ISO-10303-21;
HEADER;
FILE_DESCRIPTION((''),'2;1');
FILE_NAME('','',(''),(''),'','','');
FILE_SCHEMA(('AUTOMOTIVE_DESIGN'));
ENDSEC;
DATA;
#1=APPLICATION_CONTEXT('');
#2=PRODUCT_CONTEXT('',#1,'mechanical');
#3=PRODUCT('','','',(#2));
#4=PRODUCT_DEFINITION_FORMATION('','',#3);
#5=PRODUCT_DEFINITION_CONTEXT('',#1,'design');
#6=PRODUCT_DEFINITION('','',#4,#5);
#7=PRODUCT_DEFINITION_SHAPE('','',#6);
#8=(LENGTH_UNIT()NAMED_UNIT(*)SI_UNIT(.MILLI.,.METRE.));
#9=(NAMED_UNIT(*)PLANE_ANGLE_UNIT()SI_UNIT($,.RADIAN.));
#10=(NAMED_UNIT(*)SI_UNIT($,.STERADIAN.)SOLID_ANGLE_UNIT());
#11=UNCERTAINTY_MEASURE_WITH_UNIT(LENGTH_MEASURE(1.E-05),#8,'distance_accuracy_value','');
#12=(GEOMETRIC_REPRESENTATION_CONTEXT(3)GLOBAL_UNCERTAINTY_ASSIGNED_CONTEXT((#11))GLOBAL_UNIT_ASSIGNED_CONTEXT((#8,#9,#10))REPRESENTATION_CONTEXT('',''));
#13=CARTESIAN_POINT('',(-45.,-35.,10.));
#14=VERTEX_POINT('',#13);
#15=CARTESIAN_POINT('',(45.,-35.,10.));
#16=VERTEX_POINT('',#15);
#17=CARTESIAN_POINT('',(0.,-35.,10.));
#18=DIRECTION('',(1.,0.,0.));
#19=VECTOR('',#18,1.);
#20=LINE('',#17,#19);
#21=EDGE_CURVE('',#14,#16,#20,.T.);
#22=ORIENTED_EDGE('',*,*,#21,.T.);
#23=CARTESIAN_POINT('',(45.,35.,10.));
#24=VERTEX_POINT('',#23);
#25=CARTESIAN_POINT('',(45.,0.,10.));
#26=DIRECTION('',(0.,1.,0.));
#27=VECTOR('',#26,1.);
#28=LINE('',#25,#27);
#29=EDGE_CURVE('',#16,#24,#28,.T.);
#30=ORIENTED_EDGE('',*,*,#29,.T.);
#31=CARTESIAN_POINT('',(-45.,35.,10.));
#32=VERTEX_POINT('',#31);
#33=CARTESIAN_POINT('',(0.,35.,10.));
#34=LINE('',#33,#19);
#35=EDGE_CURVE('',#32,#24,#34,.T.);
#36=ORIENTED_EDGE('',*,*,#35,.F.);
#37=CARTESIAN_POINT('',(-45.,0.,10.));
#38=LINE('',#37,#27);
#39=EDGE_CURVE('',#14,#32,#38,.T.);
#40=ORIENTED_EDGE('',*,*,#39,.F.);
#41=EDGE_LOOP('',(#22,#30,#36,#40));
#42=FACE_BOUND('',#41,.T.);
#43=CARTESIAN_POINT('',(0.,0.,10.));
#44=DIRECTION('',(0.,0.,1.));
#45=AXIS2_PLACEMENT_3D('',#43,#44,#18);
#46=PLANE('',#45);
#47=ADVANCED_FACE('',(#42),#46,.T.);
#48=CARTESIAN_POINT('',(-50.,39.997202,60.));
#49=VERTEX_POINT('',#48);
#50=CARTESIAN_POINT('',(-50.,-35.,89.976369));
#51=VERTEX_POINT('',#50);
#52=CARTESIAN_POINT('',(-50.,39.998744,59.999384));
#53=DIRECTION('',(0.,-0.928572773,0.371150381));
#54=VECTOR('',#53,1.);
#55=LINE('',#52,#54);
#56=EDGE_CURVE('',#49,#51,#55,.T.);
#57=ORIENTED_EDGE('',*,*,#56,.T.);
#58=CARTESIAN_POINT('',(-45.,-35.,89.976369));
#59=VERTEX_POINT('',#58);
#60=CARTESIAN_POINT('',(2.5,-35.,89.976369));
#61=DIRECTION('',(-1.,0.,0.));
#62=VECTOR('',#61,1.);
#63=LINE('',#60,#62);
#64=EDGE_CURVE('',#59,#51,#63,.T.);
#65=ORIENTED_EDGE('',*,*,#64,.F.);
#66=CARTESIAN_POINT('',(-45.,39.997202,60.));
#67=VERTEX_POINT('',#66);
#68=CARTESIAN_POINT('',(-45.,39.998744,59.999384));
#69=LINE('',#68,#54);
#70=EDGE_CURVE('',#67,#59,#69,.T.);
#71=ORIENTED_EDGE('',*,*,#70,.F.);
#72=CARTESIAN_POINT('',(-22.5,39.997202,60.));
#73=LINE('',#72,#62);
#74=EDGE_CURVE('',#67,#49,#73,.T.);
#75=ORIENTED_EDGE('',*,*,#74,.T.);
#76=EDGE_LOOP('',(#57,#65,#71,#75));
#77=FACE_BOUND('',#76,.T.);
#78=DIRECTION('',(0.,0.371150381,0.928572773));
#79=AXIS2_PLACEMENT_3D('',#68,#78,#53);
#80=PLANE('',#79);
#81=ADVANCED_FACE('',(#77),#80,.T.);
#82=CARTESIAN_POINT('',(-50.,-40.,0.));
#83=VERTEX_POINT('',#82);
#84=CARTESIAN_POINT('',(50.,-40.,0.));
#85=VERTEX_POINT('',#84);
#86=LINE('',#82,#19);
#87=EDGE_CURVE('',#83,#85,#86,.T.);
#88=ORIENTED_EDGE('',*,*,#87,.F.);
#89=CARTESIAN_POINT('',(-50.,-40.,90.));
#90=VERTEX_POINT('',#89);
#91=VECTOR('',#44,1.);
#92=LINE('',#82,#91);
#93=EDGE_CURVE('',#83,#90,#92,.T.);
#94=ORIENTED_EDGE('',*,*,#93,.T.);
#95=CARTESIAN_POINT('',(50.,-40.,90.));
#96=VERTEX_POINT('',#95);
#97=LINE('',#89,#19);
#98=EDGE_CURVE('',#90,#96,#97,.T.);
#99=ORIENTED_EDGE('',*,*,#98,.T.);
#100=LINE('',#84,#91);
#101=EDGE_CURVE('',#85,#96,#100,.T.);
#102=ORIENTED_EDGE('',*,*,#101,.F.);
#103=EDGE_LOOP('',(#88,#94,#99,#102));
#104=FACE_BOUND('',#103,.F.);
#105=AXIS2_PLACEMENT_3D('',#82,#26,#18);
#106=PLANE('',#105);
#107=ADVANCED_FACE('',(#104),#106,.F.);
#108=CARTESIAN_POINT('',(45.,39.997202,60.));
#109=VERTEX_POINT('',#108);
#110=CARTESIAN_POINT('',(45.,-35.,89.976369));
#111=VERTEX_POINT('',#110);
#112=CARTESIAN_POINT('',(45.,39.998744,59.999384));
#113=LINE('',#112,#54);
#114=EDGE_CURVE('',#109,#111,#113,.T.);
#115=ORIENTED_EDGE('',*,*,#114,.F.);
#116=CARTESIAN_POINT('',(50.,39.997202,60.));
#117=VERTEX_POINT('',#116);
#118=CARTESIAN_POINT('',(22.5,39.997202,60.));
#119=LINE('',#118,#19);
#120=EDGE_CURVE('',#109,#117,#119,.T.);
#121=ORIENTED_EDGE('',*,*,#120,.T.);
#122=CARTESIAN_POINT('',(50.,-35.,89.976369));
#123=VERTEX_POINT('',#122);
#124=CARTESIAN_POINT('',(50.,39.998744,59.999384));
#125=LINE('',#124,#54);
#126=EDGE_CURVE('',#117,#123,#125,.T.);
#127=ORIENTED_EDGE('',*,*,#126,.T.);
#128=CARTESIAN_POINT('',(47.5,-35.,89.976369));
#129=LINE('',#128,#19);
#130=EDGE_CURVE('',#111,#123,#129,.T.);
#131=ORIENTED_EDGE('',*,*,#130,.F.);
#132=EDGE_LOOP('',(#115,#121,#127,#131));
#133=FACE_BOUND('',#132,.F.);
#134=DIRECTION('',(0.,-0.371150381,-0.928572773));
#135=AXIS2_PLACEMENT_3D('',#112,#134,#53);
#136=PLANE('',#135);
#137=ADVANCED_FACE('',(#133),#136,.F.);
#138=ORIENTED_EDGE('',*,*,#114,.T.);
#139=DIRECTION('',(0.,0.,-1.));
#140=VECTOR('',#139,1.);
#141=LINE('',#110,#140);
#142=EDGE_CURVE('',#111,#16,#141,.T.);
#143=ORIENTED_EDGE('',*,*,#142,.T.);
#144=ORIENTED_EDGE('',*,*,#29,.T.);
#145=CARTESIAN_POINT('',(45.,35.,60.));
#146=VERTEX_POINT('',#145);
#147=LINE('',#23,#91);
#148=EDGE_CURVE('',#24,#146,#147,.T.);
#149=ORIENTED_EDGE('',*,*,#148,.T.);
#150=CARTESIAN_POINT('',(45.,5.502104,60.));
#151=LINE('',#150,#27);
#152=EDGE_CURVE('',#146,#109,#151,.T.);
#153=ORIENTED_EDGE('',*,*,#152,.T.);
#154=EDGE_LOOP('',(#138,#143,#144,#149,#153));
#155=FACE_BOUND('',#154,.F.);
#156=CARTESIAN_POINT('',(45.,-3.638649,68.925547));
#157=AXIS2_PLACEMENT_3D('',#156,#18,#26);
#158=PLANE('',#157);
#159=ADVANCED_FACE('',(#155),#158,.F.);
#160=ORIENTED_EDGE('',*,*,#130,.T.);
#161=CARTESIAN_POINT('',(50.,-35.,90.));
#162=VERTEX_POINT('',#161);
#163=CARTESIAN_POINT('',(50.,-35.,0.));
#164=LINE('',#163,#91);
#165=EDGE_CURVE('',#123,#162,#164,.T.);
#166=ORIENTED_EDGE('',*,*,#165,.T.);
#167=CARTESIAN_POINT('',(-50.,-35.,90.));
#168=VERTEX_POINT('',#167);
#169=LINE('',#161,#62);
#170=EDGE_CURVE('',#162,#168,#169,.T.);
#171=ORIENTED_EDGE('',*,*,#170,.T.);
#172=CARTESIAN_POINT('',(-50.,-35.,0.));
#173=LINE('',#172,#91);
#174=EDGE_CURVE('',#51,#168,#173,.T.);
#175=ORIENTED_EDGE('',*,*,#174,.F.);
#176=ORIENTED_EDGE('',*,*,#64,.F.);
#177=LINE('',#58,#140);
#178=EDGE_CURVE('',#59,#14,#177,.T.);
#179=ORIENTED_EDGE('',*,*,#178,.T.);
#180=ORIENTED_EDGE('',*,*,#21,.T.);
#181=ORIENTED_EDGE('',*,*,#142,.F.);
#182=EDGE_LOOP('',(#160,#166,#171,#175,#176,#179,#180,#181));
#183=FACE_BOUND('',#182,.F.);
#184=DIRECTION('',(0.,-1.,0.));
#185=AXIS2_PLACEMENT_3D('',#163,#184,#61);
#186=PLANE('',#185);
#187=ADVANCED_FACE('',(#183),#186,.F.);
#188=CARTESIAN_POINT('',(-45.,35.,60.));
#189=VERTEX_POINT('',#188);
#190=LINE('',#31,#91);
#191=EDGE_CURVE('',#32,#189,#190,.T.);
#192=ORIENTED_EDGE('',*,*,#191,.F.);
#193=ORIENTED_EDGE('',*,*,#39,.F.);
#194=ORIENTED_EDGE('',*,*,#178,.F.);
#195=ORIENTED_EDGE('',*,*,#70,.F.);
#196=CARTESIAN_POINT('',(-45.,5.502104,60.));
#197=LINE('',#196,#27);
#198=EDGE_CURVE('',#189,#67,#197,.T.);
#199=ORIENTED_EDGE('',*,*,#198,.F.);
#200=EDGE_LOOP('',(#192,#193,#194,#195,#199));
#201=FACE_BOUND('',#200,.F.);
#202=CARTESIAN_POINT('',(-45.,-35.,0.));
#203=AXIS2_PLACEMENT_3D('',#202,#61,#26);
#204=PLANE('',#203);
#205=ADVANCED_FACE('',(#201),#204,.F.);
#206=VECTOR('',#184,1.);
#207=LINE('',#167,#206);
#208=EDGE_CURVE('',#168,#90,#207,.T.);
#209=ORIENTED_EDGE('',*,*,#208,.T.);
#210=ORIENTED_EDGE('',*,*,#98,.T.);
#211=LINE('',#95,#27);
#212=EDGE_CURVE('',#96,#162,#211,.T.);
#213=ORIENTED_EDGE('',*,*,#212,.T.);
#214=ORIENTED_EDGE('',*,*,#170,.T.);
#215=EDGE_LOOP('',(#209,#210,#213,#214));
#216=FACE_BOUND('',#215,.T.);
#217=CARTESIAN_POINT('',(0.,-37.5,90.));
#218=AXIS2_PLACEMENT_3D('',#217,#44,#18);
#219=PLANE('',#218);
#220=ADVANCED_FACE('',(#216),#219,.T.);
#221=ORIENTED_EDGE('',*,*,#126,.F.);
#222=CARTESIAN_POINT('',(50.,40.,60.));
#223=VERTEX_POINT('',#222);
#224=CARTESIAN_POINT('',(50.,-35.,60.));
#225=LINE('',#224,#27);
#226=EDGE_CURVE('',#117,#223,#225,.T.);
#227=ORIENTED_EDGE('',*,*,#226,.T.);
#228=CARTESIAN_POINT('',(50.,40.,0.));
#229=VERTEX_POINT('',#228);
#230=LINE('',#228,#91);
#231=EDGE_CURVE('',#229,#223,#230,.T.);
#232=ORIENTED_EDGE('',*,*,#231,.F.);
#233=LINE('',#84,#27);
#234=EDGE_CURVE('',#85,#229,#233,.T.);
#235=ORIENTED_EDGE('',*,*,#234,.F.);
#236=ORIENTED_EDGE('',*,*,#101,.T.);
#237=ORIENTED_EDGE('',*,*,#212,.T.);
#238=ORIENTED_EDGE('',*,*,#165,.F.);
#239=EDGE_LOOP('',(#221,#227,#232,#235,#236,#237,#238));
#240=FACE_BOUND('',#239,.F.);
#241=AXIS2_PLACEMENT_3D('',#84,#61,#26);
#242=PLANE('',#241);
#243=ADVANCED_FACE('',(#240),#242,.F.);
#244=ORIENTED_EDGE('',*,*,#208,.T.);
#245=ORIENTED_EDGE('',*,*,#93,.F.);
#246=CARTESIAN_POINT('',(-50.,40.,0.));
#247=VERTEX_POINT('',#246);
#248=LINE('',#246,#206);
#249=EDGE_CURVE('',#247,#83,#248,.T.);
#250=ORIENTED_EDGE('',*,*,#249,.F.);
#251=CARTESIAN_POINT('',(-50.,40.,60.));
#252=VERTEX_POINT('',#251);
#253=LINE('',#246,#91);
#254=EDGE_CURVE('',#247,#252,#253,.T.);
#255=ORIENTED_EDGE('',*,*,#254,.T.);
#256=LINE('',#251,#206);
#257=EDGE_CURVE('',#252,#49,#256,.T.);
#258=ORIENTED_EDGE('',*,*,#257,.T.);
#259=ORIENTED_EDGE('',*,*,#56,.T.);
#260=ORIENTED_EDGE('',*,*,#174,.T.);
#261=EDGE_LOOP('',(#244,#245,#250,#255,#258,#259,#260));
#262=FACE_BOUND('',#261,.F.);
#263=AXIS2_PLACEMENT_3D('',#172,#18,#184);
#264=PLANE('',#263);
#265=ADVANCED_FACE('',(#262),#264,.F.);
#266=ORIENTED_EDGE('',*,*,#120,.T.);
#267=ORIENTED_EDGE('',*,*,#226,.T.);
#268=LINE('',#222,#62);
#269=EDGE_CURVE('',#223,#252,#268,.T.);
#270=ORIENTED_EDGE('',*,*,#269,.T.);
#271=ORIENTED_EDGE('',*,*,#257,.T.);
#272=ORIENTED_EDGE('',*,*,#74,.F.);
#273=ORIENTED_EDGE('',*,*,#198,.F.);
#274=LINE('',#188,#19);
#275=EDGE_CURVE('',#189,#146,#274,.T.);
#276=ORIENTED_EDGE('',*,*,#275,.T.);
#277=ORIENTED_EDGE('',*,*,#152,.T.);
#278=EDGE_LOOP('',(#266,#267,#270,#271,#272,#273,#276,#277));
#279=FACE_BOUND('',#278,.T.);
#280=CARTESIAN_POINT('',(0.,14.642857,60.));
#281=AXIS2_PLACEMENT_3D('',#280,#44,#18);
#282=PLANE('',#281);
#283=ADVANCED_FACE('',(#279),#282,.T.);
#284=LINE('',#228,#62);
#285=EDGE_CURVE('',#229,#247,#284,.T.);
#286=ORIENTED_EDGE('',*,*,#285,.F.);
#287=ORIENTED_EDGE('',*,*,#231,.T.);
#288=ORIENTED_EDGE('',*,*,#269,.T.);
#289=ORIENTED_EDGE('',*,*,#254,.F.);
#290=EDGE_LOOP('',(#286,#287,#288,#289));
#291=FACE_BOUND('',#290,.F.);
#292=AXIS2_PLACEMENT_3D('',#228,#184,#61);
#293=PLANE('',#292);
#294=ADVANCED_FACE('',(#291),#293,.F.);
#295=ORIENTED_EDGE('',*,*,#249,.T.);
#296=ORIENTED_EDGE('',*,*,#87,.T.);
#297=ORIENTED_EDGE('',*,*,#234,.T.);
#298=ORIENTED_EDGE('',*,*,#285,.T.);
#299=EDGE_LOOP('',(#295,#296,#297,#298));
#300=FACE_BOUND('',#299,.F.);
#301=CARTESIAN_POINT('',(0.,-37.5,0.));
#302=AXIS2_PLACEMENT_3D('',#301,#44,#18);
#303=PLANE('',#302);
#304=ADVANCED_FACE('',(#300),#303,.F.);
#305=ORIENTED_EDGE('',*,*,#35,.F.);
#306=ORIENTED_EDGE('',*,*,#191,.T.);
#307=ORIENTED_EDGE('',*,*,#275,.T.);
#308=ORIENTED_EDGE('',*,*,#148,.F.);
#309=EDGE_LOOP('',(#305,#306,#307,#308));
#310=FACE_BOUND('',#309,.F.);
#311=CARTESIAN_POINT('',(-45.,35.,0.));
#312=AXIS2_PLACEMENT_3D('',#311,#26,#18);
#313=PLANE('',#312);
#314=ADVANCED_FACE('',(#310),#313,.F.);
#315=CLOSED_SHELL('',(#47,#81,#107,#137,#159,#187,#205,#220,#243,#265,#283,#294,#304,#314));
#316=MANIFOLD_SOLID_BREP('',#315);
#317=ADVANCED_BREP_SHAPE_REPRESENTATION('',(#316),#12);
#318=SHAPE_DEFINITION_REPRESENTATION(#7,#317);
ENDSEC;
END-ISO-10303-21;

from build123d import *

# Parameters (mm, degrees)
F1_DEPTH = 60
F0_W     = 90
F0_H     = 70
F2_DEPTH = 10
F3_DEPTH = 90
F5_START = 45
F5_DEPTH = 5
F6_START = -45
F6_DEPTH = 5


with BuildPart() as f1:
    # F0 (on Top) → F1 (new body)
    with BuildSketch(Plane.XY):
        Polygon((45, -35), (50, -35), (50, 40), (-50, 40), (-50, -35), (-45, -35), (-45, 35), (45, 35), align=None)
    extrude(amount=F1_DEPTH)

    # F0 (on Top) → F2 (join)
    with BuildSketch(Plane.XY):
        Rectangle(F0_W, F0_H)
    extrude(amount=F2_DEPTH)

    # F0 (on Top) → F3 (join)
    with BuildSketch(Plane.XY):
        Polygon((-50, -40), (50, -40), (50, -35), (45, -35), (-45, -35), (-50, -35), align=None)
    extrude(amount=F3_DEPTH)

    # F4 (on Right) → F5 (join)
    with BuildSketch(Plane.YZ.offset(F5_START)):
        Polygon((-35.0263789296, 89.9869129062), (-35.307901961, 59.999383986), (39.9987436831, 59.999383986), align=None)
    extrude(amount=F5_DEPTH)

    # F4 (on Right) → F6 (join)
    with BuildSketch(Plane.YZ.offset(F6_START)):
        Polygon((-35.0263789296, 89.9869129062), (-35.307901961, 59.999383986), (39.9987436831, 59.999383986), align=None)
    extrude(amount=-F6_DEPTH)


solid = f1.part
